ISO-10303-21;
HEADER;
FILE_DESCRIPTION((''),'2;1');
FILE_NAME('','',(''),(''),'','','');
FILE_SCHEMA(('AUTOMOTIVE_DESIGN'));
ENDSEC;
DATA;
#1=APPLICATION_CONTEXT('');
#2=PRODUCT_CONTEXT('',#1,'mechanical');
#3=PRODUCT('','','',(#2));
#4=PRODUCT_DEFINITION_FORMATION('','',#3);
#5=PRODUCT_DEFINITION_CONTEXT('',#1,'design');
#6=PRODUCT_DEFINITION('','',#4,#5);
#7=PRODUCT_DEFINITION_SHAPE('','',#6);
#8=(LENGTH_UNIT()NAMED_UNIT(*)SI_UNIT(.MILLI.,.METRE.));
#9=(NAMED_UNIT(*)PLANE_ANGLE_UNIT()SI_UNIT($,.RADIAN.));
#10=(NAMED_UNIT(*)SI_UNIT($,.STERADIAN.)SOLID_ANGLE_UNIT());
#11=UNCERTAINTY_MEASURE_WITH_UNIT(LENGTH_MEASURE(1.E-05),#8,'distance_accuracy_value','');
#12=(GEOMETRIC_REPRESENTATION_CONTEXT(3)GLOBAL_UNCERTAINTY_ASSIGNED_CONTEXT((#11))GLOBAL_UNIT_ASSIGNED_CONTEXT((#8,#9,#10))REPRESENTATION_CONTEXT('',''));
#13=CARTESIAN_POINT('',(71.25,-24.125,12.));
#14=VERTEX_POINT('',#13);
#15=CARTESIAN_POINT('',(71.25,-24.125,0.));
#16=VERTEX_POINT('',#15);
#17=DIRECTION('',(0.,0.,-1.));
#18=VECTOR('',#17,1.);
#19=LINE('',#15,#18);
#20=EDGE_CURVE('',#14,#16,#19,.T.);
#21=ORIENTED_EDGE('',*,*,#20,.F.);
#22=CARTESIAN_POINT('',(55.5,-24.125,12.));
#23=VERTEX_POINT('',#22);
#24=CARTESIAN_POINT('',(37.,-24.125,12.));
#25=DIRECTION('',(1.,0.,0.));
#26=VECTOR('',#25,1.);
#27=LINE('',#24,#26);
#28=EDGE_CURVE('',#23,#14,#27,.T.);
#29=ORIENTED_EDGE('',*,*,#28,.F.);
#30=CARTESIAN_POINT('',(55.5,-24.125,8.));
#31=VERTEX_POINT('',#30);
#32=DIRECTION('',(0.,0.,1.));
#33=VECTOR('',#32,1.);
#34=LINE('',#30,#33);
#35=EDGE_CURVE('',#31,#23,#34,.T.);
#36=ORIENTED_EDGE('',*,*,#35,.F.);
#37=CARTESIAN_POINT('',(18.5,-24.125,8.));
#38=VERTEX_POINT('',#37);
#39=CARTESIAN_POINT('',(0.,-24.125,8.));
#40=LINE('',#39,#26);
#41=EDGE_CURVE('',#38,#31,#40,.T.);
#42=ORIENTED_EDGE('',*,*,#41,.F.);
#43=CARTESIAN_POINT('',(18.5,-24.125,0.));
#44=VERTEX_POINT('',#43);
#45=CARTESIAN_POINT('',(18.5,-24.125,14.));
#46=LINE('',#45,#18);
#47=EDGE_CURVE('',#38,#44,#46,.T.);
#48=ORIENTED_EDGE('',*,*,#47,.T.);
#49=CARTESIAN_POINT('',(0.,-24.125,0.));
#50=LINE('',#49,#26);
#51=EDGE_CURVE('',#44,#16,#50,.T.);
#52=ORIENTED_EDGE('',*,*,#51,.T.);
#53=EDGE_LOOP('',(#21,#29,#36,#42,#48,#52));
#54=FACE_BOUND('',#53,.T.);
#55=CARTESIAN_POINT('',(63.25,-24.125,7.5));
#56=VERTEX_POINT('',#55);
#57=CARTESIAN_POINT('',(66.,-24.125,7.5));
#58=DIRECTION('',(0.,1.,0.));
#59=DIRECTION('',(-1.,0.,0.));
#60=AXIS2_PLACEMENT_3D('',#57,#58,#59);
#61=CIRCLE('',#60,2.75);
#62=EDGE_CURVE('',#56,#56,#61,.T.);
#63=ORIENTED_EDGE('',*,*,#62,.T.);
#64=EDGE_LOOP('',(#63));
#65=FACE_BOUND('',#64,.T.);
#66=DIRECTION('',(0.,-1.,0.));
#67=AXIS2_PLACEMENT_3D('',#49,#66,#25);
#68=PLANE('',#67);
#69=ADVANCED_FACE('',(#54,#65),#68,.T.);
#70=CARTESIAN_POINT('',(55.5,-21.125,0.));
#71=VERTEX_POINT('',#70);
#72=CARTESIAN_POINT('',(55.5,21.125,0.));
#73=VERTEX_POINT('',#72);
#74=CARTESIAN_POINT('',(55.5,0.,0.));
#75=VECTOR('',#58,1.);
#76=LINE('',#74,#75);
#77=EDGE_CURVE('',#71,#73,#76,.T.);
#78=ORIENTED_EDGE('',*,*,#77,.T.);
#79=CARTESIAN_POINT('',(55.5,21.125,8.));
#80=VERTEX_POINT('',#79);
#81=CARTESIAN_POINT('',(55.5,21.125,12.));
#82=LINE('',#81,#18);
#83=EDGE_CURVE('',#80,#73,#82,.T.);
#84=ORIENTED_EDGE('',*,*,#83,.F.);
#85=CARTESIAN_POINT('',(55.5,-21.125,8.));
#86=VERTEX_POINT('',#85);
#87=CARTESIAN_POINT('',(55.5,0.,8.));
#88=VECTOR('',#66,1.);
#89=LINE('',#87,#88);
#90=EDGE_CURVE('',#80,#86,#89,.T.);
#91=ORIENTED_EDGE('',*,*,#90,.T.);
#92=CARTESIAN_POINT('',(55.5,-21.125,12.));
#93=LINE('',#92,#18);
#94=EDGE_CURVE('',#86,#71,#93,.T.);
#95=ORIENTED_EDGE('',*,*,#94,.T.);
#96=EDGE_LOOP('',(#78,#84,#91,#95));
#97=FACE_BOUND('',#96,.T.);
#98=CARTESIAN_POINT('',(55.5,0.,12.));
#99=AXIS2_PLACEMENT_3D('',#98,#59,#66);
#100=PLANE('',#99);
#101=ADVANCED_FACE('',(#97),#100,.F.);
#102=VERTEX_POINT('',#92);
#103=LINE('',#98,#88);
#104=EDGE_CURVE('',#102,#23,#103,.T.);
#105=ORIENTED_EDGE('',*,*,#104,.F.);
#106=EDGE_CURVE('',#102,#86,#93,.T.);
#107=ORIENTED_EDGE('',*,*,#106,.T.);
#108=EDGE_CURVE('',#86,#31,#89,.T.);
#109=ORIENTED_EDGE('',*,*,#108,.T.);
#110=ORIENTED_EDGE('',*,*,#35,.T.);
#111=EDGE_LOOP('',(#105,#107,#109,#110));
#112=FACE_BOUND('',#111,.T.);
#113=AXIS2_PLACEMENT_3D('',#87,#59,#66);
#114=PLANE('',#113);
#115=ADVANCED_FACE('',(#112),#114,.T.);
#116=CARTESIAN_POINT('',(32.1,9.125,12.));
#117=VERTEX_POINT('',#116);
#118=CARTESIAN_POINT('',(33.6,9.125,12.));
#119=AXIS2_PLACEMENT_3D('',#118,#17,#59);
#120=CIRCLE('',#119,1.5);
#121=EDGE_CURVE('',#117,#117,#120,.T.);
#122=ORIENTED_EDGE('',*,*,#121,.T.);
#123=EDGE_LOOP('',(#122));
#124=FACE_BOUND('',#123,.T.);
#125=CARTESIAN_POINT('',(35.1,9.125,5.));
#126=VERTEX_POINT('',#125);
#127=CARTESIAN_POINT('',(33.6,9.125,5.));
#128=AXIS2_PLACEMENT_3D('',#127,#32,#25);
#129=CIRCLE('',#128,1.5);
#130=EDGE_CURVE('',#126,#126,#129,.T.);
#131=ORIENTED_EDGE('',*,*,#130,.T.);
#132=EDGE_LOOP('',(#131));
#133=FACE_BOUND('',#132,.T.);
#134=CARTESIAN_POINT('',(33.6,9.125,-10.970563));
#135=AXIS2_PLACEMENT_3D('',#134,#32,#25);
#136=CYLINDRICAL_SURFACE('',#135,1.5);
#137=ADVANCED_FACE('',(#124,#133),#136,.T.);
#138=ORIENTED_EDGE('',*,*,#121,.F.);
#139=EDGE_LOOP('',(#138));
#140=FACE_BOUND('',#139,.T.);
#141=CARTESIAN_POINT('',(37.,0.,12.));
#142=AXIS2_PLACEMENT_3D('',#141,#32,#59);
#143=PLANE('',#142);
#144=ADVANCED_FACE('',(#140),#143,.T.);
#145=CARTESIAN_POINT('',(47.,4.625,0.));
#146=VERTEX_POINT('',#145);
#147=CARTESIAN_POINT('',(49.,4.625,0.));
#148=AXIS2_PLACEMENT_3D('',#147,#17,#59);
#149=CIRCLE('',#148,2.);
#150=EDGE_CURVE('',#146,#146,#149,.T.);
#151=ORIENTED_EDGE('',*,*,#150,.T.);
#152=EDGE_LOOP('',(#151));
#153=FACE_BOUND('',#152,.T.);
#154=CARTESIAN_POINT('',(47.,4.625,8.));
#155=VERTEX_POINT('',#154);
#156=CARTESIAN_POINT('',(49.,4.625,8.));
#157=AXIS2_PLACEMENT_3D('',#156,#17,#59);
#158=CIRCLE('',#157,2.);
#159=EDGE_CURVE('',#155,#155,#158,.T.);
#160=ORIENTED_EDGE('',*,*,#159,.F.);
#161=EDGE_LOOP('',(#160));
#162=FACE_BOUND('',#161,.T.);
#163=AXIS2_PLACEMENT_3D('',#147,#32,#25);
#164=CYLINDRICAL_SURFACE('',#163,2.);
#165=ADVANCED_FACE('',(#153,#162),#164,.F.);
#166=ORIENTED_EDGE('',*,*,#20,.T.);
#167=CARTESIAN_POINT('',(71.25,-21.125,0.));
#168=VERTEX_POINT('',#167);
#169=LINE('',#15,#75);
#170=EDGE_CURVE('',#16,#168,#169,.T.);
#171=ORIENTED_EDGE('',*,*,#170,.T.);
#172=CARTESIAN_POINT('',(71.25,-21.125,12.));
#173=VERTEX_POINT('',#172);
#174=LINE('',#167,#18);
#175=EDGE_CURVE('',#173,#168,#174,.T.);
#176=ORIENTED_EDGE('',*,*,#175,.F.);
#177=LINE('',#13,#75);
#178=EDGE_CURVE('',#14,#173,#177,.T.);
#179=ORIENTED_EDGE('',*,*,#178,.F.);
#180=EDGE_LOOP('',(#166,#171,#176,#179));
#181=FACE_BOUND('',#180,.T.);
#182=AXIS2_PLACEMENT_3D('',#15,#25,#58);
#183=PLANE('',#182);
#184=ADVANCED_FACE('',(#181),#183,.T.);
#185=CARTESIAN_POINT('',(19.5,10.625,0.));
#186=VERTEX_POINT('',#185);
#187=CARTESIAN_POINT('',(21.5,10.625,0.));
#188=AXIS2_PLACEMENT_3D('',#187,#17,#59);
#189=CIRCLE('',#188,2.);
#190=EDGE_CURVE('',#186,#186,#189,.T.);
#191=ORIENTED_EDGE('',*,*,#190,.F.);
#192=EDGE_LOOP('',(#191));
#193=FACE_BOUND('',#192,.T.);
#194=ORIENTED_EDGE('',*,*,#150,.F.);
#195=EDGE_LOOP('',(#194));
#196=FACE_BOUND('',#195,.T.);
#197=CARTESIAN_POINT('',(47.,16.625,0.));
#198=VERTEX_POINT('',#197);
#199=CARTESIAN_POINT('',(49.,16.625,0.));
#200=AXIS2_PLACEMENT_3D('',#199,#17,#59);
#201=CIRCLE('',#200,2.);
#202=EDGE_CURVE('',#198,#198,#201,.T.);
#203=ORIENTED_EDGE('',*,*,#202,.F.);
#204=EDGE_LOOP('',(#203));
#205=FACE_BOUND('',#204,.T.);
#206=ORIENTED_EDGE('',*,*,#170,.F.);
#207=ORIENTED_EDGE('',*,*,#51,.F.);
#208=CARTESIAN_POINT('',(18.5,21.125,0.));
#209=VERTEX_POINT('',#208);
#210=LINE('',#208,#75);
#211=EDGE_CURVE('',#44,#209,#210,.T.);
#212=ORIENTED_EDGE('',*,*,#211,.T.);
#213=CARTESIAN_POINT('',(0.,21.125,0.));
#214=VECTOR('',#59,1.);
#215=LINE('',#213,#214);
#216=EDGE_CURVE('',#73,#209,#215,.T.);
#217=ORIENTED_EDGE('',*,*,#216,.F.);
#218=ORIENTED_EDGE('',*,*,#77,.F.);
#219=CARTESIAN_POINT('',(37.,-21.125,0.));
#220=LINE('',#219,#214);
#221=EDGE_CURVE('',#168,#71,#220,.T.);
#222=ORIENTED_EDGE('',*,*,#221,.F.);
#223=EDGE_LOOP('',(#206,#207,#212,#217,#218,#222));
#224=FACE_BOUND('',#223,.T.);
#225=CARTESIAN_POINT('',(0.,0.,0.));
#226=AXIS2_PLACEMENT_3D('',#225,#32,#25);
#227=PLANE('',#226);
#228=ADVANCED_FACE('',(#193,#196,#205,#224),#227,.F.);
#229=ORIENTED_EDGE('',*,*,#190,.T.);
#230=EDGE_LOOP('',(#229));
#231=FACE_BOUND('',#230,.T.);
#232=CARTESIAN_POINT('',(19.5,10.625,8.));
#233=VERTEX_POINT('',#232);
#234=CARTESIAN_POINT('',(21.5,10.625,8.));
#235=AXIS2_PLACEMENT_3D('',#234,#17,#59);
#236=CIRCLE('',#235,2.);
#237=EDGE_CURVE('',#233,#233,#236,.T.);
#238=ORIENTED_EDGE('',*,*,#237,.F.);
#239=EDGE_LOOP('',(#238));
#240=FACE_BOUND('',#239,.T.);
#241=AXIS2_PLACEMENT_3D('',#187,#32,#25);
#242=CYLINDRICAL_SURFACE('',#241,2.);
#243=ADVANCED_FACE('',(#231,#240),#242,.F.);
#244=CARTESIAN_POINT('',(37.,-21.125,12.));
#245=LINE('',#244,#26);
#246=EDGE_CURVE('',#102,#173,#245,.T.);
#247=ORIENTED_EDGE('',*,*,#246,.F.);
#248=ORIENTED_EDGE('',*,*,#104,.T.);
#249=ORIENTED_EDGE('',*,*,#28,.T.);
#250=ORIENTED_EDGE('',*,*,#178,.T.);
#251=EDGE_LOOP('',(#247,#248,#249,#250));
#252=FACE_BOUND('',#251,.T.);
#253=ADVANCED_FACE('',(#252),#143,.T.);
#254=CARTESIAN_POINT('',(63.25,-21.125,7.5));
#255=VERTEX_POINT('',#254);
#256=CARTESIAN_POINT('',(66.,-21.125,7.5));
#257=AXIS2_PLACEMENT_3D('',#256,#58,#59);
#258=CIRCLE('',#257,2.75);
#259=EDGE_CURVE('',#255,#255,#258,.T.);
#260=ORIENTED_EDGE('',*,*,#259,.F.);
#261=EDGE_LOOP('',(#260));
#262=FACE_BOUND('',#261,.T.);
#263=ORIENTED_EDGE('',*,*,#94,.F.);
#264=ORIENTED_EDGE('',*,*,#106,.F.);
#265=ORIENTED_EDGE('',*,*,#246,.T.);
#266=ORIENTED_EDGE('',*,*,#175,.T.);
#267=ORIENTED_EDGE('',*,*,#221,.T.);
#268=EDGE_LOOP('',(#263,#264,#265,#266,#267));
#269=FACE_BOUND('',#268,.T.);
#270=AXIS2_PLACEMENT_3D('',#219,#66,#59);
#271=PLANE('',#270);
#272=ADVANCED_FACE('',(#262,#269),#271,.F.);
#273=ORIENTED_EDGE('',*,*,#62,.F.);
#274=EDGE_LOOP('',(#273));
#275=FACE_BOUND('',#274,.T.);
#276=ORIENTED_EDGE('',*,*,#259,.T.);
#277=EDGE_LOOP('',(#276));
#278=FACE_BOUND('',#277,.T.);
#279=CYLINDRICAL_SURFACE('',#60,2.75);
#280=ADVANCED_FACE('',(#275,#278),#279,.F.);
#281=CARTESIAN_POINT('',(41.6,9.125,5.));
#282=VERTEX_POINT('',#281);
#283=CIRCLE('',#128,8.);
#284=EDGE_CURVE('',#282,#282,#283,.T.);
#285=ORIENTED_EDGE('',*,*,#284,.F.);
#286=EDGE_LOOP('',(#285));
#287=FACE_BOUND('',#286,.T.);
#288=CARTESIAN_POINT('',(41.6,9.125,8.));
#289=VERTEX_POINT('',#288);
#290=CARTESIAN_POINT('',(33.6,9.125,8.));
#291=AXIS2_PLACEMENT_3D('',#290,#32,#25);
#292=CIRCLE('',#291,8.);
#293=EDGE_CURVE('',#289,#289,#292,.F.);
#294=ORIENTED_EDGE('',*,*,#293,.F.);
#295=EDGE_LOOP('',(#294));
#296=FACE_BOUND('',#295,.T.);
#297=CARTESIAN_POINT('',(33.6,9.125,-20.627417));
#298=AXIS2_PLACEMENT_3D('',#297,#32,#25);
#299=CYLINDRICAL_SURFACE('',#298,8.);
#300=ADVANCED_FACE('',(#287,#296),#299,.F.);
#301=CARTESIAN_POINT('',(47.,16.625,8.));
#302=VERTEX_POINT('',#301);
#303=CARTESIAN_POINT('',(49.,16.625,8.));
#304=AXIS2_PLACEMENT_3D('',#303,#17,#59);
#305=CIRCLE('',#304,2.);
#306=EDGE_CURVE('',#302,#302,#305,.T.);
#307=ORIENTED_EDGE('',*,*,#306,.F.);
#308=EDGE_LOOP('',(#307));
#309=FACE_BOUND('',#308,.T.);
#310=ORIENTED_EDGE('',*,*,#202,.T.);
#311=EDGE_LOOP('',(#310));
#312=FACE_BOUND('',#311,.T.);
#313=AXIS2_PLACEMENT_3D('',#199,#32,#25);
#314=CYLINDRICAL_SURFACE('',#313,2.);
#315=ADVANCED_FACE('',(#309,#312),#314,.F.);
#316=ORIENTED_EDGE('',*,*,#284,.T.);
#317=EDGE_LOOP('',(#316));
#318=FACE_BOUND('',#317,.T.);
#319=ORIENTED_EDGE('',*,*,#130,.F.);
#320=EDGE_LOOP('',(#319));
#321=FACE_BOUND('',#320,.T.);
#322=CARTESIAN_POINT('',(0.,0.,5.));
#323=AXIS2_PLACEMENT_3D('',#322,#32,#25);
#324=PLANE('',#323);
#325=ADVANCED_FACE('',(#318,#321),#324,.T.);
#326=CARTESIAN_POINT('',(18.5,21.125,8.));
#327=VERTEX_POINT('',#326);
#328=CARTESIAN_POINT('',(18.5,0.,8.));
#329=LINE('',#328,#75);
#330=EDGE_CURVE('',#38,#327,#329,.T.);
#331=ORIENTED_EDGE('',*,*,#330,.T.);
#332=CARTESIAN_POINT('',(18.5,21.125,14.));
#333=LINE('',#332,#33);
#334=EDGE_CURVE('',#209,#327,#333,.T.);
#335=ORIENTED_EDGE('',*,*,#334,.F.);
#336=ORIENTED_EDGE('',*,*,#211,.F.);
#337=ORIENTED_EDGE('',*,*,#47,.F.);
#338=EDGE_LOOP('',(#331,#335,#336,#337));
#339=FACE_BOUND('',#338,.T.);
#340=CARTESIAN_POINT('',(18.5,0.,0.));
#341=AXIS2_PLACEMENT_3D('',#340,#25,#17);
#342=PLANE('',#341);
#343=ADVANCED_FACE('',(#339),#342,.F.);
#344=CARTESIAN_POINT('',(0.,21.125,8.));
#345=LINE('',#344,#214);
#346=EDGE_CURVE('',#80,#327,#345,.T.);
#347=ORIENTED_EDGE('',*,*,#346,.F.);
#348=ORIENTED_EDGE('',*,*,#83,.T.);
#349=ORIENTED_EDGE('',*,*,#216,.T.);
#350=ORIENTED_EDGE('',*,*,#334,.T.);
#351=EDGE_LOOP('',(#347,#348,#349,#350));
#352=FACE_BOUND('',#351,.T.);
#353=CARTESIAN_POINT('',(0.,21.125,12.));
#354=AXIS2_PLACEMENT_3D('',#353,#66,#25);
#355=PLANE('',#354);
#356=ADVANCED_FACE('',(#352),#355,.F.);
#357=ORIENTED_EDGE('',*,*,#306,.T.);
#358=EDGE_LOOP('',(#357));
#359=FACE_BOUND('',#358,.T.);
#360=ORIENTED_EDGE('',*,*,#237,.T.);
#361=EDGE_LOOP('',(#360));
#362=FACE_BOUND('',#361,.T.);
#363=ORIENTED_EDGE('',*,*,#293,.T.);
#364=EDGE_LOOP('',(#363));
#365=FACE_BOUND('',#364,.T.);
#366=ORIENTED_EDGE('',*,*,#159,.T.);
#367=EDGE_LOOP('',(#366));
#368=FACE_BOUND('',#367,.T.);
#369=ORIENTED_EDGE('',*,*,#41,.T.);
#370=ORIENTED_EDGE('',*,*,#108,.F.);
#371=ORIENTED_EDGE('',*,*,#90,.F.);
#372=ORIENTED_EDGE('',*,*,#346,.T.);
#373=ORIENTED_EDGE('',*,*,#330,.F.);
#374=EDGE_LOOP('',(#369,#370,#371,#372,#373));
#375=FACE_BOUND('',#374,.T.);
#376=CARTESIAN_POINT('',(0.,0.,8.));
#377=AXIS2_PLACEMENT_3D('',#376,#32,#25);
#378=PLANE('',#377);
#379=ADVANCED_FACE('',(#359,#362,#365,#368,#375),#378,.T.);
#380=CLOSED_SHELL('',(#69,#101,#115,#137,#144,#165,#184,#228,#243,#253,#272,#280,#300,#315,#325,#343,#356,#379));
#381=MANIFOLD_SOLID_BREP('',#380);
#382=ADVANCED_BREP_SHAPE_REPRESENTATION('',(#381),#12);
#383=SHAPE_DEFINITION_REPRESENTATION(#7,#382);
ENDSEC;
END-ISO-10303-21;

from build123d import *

# Parameters (mm, degrees)
ESQUISSE1_W             = 37
ESQUISSE1_H             = 42.25
ESQUISSE1_R             = 6
BOSS_EXTRU_1_DEPTH      = 12
ESQUISSE2_R             = 6
ESQUISSE2_R_2           = 1.5
ENL_V_MAT_EXTRU_1_DEPTH = 3
ESQUISSE3_W             = 37
ESQUISSE3_H             = 12
ESQUISSE3_W_2           = 15.75
ESQUISSE3_R             = 2.75
BOSS_EXTRU_2_DEPTH      = 3
ESQUISSE4_W             = 37
ESQUISSE4_H             = 45.25
ESQUISSE4_R             = 8
ENL_V_MAT_EXTRU_2_DEPTH = 4
ESQUISSE4_3_R           = 8
ESQUISSE4_3_R_2         = 6
ESQUISSE4_3_R_3         = 1.5
ENL_V_MAT_EXTRU_4_DEPTH = 7
CONG_2_R                = 5
CONG_3_R                = 5
ESQUISSE5_R             = 2
ENL_V_MAT_EXTRU_5_DEPTH = 43.650652105
BOSS_EXTRU_3_START      = 2
ESQUISSE2_2_R           = 1.5
BOSS_EXTRU_3_DEPTH      = 2
SYM_TRIE1_OUTLINE_W     = 37
SYM_TRIE1_OUTLINE_H     = 45.25
SYM_TRIE1_OUTLINE_R     = 8
SYM_TRIE1_OUTLINE_R_2   = 2
SYM_TRIE1_OUTLINE_R_3   = 1.5
SYM_TRIE1_DEPTH         = 8
SYM_TRIE1_2_OUTLINE_W   = 15.75
SYM_TRIE1_2_OUTLINE_H   = 3
SYM_TRIE1_2_OUTLINE_R   = 8
SYM_TRIE1_2_OUTLINE_R_2 = 1.5
SYM_TRIE1_2_DEPTH       = 4.7499999
SYM_TRIE1_START         = 10.2500001
SYM_TRIE1_3_OUTLINE_W   = 15.75
SYM_TRIE1_3_OUTLINE_H   = 3
SYM_TRIE1_3_OUTLINE_R   = 1.5
SYM_TRIE1_3_DEPTH       = 1.7499999
SYM_TRIE1_START_2       = 1.13256
SYM_TRIE1_4_OUTLINE_R   = 8
SYM_TRIE1_4_OUTLINE_R_2 = 1.5
SYM_TRIE1_4_DEPTH       = 3.86744
SYM_TRIE1_START_3       = 8
SYM_TRIE1_5_OUTLINE_R   = 1.5
SYM_TRIE1_5_DEPTH       = 2.73256
SYM_TRIE1_START_4       = -24.125
SYM_TRIE1_6_DEPTH       = 3
ESQUISSE6_W             = 14
ESQUISSE6_H             = 45.25
ENL_V_MAT_EXTRU_6_DEPTH = 60.670580063


with BuildPart() as part:
    # Esquisse1 → Boss.-Extru.1 (new body)
    # profile 1 of 2: a face of its own
    with BuildSketch(Plane.XY):
        Rectangle(ESQUISSE1_W, ESQUISSE1_H)
        with Locations((3.4, 9.125)):
            Circle(ESQUISSE1_R, mode=Mode.SUBTRACT)
    # profile 2 of 2: a face of its own
    with BuildSketch(Plane.XY):
        with Locations((3.4, 9.125)):
            Circle(ESQUISSE1_R)
    extrude(amount=BOSS_EXTRU_1_DEPTH)

    # Esquisse2 → Enlèv. mat.-Extru.1 (cut)
    with BuildSketch(Plane.XY.offset(12)):
        with Locations((3.4, 9.125)):
            Circle(ESQUISSE2_R)
        with Locations((3.4, 9.125)):
            Circle(ESQUISSE2_R_2, mode=Mode.SUBTRACT)
    extrude(amount=-ENL_V_MAT_EXTRU_1_DEPTH, mode=Mode.SUBTRACT)

    # Esquisse3 → Boss.-Extru.2 (add)
    # profile 1 of 2: a face of its own
    with BuildSketch(Plane.XZ.offset(21.125)):
        with Locations((0, 6)):
            Rectangle(ESQUISSE3_W, ESQUISSE3_H)
    # profile 2 of 2: a face of its own
    with BuildSketch(Plane.XZ.offset(21.125)):
        with Locations((-26.375, 6)):
            Rectangle(ESQUISSE3_W_2, ESQUISSE3_H)
        with Locations((-29, 7.5)):
            Circle(ESQUISSE3_R, mode=Mode.SUBTRACT)
    extrude(amount=BOSS_EXTRU_2_DEPTH)

    # Esquisse4 → Enlèv. mat.-Extru.2 (cut)
    with BuildSketch(Plane.XY.offset(12)):
        with Locations((0, -1.5)):
            Rectangle(ESQUISSE4_W, ESQUISSE4_H)
        with Locations((3.4, 9.125)):
            Circle(ESQUISSE4_R, mode=Mode.SUBTRACT)
    extrude(amount=-ENL_V_MAT_EXTRU_2_DEPTH, mode=Mode.SUBTRACT)

    # Esquisse4<3> → Enlèv. mat.-Extru.4 (cut)
    # profile 1 of 2: a face of its own
    with BuildSketch(Plane.XY.offset(12)):
        with Locations((3.4, 9.125)):
            Circle(ESQUISSE4_3_R)
        with Locations((3.4, 9.125)):
            Circle(ESQUISSE4_3_R_2, mode=Mode.SUBTRACT)
    # profile 2 of 2: a face of its own
    with BuildSketch(Plane.XY.offset(12)):
        with Locations((3.4, 9.125)):
            Circle(ESQUISSE4_3_R_2)
        with Locations((3.4, 9.125)):
            Circle(ESQUISSE4_3_R_3, mode=Mode.SUBTRACT)
    extrude(amount=-ENL_V_MAT_EXTRU_4_DEPTH, mode=Mode.SUBTRACT)

    # Congé2
    # the kernel refuses this fillet: 5 mm, written as the material it adds along each edge
    with BuildSketch(Plane(origin=(-18.5, -24.125, 8), x_dir=(1.5667467323505199e-12, 0, 1.0), z_dir=(0, 1, 0))) as cong_2_piece_1:
        with BuildLine():
            CenterArc((5, 4.898979486), CONG_2_R, 180, 78.463040967)
            Line((0, 4.898979486), (0, 0))
            Line((0, 0), (4, 0))
        make_face()
    extrude(amount=3)

    # Congé3
    cong_3_edges = [part.edges().sort_by_distance(p)[0] for p in [
        (-18.5, -22.625, 12),
    ]]
    fillet(cong_3_edges, radius=CONG_3_R)

    # Esquisse5 → Enlèv. mat.-Extru.5 (cut, through all)
    with BuildSketch(Plane.XY.offset(8)):
        with Locations((-12, 16.625)):
            Circle(ESQUISSE5_R)
        with Locations((-12, 4.625)):
            Circle(ESQUISSE5_R)
        with Locations((15.5, 10.625)):
            Circle(ESQUISSE5_R)
    extrude(amount=-ENL_V_MAT_EXTRU_5_DEPTH, mode=Mode.SUBTRACT)

    # Esquisse2<2> → Boss.-Extru.3 (add)
    with BuildSketch(Plane.XY.offset(12).offset(BOSS_EXTRU_3_START)):
        with Locations((3.4, 9.125)):
            Circle(ESQUISSE2_2_R)
    extrude(amount=-BOSS_EXTRU_3_DEPTH)

    # Symétrie1: read off the stored shape, not the designer's step
    # Symétrie1 outline → Symétrie1 (add)
    # profile 1 of 2: a face of its own
    with BuildSketch(Plane.XY):
        with Locations((37, -1.5)):
            Rectangle(SYM_TRIE1_OUTLINE_W, SYM_TRIE1_OUTLINE_H)
        with Locations((33.6, 9.125)):
            Circle(SYM_TRIE1_OUTLINE_R, mode=Mode.SUBTRACT)
        with Locations((21.5, 10.625)):
            Circle(SYM_TRIE1_OUTLINE_R_2, mode=Mode.SUBTRACT)
        with Locations((49, 4.625)):
            Circle(SYM_TRIE1_OUTLINE_R_2, mode=Mode.SUBTRACT)
        with Locations((49, 16.625)):
            Circle(SYM_TRIE1_OUTLINE_R_2, mode=Mode.SUBTRACT)
    # profile 2 of 2: a face of its own
    with BuildSketch(Plane.XY):
        with Locations((33.6, 9.125)):
            Circle(SYM_TRIE1_OUTLINE_R_3)
    extrude(amount=SYM_TRIE1_DEPTH)

    # Sym_trie1 2 outline → Sym_trie1 2 (add)
    # profile 1 of 2: a face of its own
    with BuildSketch(Plane.XY):
        with Locations((63.375, -22.625)):
            Rectangle(SYM_TRIE1_2_OUTLINE_W, SYM_TRIE1_2_OUTLINE_H)
    # profile 2 of 2: a face of its own
    with BuildSketch(Plane.XY):
        with Locations((33.6, 9.125)):
            Circle(SYM_TRIE1_2_OUTLINE_R)
        with Locations((33.6, 9.125)):
            Circle(SYM_TRIE1_2_OUTLINE_R_2, mode=Mode.SUBTRACT)
    extrude(amount=SYM_TRIE1_2_DEPTH)

    # Sym_trie1 4 outline → Sym_trie1 4 (add)
    with BuildSketch(Plane.XY.offset(SYM_TRIE1_START_2)):
        with Locations((33.6, 9.125)):
            Circle(SYM_TRIE1_4_OUTLINE_R)
        with Locations((33.6, 9.125)):
            Circle(SYM_TRIE1_4_OUTLINE_R_2, mode=Mode.SUBTRACT)
    extrude(amount=SYM_TRIE1_4_DEPTH)



with BuildPart() as body_2:
    # Sym_trie1 3 outline → Sym_trie1 3 (new body)
    with BuildSketch(Plane.XY.offset(SYM_TRIE1_START)):
        with Locations((63.375, -22.625)):
            Rectangle(SYM_TRIE1_3_OUTLINE_W, SYM_TRIE1_3_OUTLINE_H)
        with Locations((33.6, 9.125)):
            Circle(SYM_TRIE1_3_OUTLINE_R)
    extrude(amount=SYM_TRIE1_3_DEPTH)


with BuildPart() as part_1:
    add(part.part)

    add(body_2.part)  # Sym_trie1 5 merges body 2
    # Sym_trie1 5 outline → Sym_trie1 5 (add)
    with BuildSketch(Plane.XY.offset(SYM_TRIE1_START_3)):
        with Locations((33.6, 9.125)):
            Circle(SYM_TRIE1_5_OUTLINE_R)
    extrude(amount=SYM_TRIE1_5_DEPTH)

    # Sym_trie1 6 outline → Sym_trie1 6 (add)
    with BuildSketch(Plane(origin=(0, 0, 0), x_dir=(1, 0, 0), z_dir=(0, 1, 0)).offset(SYM_TRIE1_START_4)):
        with BuildLine():
            Line((66, -10.25), (71.25, -10.2500001))
            Line((71.25, -10.2500001), (71.25, -4.7499999))
            Line((71.25, -4.7499999), (66, -4.75))
            ThreePointArc((66, -4.75), (68.75, -7.5), (66, -10.25))
        make_face()
        with BuildLine():
            Line((55.5, -10.2500001), (66, -10.25))
            ThreePointArc((66, -10.25), (63.25, -7.5), (66, -4.75))
            Line((66, -4.75), (55.5, -4.7499999))
            Line((55.5, -4.7499999), (55.5, -10.2500001))
        make_face()
    extrude(amount=SYM_TRIE1_6_DEPTH)

    # Esquisse6 → Enlèv. mat.-Extru.6 (cut, through all)
    with BuildSketch(Plane(origin=(18.5, 0, 0), x_dir=(0, 0, -1), z_dir=(1, 0, 0))):
        with Locations((-7, -1.5)):
            Rectangle(ESQUISSE6_W, ESQUISSE6_H)
    extrude(amount=-ENL_V_MAT_EXTRU_6_DEPTH, mode=Mode.SUBTRACT)


solid = part_1.part
